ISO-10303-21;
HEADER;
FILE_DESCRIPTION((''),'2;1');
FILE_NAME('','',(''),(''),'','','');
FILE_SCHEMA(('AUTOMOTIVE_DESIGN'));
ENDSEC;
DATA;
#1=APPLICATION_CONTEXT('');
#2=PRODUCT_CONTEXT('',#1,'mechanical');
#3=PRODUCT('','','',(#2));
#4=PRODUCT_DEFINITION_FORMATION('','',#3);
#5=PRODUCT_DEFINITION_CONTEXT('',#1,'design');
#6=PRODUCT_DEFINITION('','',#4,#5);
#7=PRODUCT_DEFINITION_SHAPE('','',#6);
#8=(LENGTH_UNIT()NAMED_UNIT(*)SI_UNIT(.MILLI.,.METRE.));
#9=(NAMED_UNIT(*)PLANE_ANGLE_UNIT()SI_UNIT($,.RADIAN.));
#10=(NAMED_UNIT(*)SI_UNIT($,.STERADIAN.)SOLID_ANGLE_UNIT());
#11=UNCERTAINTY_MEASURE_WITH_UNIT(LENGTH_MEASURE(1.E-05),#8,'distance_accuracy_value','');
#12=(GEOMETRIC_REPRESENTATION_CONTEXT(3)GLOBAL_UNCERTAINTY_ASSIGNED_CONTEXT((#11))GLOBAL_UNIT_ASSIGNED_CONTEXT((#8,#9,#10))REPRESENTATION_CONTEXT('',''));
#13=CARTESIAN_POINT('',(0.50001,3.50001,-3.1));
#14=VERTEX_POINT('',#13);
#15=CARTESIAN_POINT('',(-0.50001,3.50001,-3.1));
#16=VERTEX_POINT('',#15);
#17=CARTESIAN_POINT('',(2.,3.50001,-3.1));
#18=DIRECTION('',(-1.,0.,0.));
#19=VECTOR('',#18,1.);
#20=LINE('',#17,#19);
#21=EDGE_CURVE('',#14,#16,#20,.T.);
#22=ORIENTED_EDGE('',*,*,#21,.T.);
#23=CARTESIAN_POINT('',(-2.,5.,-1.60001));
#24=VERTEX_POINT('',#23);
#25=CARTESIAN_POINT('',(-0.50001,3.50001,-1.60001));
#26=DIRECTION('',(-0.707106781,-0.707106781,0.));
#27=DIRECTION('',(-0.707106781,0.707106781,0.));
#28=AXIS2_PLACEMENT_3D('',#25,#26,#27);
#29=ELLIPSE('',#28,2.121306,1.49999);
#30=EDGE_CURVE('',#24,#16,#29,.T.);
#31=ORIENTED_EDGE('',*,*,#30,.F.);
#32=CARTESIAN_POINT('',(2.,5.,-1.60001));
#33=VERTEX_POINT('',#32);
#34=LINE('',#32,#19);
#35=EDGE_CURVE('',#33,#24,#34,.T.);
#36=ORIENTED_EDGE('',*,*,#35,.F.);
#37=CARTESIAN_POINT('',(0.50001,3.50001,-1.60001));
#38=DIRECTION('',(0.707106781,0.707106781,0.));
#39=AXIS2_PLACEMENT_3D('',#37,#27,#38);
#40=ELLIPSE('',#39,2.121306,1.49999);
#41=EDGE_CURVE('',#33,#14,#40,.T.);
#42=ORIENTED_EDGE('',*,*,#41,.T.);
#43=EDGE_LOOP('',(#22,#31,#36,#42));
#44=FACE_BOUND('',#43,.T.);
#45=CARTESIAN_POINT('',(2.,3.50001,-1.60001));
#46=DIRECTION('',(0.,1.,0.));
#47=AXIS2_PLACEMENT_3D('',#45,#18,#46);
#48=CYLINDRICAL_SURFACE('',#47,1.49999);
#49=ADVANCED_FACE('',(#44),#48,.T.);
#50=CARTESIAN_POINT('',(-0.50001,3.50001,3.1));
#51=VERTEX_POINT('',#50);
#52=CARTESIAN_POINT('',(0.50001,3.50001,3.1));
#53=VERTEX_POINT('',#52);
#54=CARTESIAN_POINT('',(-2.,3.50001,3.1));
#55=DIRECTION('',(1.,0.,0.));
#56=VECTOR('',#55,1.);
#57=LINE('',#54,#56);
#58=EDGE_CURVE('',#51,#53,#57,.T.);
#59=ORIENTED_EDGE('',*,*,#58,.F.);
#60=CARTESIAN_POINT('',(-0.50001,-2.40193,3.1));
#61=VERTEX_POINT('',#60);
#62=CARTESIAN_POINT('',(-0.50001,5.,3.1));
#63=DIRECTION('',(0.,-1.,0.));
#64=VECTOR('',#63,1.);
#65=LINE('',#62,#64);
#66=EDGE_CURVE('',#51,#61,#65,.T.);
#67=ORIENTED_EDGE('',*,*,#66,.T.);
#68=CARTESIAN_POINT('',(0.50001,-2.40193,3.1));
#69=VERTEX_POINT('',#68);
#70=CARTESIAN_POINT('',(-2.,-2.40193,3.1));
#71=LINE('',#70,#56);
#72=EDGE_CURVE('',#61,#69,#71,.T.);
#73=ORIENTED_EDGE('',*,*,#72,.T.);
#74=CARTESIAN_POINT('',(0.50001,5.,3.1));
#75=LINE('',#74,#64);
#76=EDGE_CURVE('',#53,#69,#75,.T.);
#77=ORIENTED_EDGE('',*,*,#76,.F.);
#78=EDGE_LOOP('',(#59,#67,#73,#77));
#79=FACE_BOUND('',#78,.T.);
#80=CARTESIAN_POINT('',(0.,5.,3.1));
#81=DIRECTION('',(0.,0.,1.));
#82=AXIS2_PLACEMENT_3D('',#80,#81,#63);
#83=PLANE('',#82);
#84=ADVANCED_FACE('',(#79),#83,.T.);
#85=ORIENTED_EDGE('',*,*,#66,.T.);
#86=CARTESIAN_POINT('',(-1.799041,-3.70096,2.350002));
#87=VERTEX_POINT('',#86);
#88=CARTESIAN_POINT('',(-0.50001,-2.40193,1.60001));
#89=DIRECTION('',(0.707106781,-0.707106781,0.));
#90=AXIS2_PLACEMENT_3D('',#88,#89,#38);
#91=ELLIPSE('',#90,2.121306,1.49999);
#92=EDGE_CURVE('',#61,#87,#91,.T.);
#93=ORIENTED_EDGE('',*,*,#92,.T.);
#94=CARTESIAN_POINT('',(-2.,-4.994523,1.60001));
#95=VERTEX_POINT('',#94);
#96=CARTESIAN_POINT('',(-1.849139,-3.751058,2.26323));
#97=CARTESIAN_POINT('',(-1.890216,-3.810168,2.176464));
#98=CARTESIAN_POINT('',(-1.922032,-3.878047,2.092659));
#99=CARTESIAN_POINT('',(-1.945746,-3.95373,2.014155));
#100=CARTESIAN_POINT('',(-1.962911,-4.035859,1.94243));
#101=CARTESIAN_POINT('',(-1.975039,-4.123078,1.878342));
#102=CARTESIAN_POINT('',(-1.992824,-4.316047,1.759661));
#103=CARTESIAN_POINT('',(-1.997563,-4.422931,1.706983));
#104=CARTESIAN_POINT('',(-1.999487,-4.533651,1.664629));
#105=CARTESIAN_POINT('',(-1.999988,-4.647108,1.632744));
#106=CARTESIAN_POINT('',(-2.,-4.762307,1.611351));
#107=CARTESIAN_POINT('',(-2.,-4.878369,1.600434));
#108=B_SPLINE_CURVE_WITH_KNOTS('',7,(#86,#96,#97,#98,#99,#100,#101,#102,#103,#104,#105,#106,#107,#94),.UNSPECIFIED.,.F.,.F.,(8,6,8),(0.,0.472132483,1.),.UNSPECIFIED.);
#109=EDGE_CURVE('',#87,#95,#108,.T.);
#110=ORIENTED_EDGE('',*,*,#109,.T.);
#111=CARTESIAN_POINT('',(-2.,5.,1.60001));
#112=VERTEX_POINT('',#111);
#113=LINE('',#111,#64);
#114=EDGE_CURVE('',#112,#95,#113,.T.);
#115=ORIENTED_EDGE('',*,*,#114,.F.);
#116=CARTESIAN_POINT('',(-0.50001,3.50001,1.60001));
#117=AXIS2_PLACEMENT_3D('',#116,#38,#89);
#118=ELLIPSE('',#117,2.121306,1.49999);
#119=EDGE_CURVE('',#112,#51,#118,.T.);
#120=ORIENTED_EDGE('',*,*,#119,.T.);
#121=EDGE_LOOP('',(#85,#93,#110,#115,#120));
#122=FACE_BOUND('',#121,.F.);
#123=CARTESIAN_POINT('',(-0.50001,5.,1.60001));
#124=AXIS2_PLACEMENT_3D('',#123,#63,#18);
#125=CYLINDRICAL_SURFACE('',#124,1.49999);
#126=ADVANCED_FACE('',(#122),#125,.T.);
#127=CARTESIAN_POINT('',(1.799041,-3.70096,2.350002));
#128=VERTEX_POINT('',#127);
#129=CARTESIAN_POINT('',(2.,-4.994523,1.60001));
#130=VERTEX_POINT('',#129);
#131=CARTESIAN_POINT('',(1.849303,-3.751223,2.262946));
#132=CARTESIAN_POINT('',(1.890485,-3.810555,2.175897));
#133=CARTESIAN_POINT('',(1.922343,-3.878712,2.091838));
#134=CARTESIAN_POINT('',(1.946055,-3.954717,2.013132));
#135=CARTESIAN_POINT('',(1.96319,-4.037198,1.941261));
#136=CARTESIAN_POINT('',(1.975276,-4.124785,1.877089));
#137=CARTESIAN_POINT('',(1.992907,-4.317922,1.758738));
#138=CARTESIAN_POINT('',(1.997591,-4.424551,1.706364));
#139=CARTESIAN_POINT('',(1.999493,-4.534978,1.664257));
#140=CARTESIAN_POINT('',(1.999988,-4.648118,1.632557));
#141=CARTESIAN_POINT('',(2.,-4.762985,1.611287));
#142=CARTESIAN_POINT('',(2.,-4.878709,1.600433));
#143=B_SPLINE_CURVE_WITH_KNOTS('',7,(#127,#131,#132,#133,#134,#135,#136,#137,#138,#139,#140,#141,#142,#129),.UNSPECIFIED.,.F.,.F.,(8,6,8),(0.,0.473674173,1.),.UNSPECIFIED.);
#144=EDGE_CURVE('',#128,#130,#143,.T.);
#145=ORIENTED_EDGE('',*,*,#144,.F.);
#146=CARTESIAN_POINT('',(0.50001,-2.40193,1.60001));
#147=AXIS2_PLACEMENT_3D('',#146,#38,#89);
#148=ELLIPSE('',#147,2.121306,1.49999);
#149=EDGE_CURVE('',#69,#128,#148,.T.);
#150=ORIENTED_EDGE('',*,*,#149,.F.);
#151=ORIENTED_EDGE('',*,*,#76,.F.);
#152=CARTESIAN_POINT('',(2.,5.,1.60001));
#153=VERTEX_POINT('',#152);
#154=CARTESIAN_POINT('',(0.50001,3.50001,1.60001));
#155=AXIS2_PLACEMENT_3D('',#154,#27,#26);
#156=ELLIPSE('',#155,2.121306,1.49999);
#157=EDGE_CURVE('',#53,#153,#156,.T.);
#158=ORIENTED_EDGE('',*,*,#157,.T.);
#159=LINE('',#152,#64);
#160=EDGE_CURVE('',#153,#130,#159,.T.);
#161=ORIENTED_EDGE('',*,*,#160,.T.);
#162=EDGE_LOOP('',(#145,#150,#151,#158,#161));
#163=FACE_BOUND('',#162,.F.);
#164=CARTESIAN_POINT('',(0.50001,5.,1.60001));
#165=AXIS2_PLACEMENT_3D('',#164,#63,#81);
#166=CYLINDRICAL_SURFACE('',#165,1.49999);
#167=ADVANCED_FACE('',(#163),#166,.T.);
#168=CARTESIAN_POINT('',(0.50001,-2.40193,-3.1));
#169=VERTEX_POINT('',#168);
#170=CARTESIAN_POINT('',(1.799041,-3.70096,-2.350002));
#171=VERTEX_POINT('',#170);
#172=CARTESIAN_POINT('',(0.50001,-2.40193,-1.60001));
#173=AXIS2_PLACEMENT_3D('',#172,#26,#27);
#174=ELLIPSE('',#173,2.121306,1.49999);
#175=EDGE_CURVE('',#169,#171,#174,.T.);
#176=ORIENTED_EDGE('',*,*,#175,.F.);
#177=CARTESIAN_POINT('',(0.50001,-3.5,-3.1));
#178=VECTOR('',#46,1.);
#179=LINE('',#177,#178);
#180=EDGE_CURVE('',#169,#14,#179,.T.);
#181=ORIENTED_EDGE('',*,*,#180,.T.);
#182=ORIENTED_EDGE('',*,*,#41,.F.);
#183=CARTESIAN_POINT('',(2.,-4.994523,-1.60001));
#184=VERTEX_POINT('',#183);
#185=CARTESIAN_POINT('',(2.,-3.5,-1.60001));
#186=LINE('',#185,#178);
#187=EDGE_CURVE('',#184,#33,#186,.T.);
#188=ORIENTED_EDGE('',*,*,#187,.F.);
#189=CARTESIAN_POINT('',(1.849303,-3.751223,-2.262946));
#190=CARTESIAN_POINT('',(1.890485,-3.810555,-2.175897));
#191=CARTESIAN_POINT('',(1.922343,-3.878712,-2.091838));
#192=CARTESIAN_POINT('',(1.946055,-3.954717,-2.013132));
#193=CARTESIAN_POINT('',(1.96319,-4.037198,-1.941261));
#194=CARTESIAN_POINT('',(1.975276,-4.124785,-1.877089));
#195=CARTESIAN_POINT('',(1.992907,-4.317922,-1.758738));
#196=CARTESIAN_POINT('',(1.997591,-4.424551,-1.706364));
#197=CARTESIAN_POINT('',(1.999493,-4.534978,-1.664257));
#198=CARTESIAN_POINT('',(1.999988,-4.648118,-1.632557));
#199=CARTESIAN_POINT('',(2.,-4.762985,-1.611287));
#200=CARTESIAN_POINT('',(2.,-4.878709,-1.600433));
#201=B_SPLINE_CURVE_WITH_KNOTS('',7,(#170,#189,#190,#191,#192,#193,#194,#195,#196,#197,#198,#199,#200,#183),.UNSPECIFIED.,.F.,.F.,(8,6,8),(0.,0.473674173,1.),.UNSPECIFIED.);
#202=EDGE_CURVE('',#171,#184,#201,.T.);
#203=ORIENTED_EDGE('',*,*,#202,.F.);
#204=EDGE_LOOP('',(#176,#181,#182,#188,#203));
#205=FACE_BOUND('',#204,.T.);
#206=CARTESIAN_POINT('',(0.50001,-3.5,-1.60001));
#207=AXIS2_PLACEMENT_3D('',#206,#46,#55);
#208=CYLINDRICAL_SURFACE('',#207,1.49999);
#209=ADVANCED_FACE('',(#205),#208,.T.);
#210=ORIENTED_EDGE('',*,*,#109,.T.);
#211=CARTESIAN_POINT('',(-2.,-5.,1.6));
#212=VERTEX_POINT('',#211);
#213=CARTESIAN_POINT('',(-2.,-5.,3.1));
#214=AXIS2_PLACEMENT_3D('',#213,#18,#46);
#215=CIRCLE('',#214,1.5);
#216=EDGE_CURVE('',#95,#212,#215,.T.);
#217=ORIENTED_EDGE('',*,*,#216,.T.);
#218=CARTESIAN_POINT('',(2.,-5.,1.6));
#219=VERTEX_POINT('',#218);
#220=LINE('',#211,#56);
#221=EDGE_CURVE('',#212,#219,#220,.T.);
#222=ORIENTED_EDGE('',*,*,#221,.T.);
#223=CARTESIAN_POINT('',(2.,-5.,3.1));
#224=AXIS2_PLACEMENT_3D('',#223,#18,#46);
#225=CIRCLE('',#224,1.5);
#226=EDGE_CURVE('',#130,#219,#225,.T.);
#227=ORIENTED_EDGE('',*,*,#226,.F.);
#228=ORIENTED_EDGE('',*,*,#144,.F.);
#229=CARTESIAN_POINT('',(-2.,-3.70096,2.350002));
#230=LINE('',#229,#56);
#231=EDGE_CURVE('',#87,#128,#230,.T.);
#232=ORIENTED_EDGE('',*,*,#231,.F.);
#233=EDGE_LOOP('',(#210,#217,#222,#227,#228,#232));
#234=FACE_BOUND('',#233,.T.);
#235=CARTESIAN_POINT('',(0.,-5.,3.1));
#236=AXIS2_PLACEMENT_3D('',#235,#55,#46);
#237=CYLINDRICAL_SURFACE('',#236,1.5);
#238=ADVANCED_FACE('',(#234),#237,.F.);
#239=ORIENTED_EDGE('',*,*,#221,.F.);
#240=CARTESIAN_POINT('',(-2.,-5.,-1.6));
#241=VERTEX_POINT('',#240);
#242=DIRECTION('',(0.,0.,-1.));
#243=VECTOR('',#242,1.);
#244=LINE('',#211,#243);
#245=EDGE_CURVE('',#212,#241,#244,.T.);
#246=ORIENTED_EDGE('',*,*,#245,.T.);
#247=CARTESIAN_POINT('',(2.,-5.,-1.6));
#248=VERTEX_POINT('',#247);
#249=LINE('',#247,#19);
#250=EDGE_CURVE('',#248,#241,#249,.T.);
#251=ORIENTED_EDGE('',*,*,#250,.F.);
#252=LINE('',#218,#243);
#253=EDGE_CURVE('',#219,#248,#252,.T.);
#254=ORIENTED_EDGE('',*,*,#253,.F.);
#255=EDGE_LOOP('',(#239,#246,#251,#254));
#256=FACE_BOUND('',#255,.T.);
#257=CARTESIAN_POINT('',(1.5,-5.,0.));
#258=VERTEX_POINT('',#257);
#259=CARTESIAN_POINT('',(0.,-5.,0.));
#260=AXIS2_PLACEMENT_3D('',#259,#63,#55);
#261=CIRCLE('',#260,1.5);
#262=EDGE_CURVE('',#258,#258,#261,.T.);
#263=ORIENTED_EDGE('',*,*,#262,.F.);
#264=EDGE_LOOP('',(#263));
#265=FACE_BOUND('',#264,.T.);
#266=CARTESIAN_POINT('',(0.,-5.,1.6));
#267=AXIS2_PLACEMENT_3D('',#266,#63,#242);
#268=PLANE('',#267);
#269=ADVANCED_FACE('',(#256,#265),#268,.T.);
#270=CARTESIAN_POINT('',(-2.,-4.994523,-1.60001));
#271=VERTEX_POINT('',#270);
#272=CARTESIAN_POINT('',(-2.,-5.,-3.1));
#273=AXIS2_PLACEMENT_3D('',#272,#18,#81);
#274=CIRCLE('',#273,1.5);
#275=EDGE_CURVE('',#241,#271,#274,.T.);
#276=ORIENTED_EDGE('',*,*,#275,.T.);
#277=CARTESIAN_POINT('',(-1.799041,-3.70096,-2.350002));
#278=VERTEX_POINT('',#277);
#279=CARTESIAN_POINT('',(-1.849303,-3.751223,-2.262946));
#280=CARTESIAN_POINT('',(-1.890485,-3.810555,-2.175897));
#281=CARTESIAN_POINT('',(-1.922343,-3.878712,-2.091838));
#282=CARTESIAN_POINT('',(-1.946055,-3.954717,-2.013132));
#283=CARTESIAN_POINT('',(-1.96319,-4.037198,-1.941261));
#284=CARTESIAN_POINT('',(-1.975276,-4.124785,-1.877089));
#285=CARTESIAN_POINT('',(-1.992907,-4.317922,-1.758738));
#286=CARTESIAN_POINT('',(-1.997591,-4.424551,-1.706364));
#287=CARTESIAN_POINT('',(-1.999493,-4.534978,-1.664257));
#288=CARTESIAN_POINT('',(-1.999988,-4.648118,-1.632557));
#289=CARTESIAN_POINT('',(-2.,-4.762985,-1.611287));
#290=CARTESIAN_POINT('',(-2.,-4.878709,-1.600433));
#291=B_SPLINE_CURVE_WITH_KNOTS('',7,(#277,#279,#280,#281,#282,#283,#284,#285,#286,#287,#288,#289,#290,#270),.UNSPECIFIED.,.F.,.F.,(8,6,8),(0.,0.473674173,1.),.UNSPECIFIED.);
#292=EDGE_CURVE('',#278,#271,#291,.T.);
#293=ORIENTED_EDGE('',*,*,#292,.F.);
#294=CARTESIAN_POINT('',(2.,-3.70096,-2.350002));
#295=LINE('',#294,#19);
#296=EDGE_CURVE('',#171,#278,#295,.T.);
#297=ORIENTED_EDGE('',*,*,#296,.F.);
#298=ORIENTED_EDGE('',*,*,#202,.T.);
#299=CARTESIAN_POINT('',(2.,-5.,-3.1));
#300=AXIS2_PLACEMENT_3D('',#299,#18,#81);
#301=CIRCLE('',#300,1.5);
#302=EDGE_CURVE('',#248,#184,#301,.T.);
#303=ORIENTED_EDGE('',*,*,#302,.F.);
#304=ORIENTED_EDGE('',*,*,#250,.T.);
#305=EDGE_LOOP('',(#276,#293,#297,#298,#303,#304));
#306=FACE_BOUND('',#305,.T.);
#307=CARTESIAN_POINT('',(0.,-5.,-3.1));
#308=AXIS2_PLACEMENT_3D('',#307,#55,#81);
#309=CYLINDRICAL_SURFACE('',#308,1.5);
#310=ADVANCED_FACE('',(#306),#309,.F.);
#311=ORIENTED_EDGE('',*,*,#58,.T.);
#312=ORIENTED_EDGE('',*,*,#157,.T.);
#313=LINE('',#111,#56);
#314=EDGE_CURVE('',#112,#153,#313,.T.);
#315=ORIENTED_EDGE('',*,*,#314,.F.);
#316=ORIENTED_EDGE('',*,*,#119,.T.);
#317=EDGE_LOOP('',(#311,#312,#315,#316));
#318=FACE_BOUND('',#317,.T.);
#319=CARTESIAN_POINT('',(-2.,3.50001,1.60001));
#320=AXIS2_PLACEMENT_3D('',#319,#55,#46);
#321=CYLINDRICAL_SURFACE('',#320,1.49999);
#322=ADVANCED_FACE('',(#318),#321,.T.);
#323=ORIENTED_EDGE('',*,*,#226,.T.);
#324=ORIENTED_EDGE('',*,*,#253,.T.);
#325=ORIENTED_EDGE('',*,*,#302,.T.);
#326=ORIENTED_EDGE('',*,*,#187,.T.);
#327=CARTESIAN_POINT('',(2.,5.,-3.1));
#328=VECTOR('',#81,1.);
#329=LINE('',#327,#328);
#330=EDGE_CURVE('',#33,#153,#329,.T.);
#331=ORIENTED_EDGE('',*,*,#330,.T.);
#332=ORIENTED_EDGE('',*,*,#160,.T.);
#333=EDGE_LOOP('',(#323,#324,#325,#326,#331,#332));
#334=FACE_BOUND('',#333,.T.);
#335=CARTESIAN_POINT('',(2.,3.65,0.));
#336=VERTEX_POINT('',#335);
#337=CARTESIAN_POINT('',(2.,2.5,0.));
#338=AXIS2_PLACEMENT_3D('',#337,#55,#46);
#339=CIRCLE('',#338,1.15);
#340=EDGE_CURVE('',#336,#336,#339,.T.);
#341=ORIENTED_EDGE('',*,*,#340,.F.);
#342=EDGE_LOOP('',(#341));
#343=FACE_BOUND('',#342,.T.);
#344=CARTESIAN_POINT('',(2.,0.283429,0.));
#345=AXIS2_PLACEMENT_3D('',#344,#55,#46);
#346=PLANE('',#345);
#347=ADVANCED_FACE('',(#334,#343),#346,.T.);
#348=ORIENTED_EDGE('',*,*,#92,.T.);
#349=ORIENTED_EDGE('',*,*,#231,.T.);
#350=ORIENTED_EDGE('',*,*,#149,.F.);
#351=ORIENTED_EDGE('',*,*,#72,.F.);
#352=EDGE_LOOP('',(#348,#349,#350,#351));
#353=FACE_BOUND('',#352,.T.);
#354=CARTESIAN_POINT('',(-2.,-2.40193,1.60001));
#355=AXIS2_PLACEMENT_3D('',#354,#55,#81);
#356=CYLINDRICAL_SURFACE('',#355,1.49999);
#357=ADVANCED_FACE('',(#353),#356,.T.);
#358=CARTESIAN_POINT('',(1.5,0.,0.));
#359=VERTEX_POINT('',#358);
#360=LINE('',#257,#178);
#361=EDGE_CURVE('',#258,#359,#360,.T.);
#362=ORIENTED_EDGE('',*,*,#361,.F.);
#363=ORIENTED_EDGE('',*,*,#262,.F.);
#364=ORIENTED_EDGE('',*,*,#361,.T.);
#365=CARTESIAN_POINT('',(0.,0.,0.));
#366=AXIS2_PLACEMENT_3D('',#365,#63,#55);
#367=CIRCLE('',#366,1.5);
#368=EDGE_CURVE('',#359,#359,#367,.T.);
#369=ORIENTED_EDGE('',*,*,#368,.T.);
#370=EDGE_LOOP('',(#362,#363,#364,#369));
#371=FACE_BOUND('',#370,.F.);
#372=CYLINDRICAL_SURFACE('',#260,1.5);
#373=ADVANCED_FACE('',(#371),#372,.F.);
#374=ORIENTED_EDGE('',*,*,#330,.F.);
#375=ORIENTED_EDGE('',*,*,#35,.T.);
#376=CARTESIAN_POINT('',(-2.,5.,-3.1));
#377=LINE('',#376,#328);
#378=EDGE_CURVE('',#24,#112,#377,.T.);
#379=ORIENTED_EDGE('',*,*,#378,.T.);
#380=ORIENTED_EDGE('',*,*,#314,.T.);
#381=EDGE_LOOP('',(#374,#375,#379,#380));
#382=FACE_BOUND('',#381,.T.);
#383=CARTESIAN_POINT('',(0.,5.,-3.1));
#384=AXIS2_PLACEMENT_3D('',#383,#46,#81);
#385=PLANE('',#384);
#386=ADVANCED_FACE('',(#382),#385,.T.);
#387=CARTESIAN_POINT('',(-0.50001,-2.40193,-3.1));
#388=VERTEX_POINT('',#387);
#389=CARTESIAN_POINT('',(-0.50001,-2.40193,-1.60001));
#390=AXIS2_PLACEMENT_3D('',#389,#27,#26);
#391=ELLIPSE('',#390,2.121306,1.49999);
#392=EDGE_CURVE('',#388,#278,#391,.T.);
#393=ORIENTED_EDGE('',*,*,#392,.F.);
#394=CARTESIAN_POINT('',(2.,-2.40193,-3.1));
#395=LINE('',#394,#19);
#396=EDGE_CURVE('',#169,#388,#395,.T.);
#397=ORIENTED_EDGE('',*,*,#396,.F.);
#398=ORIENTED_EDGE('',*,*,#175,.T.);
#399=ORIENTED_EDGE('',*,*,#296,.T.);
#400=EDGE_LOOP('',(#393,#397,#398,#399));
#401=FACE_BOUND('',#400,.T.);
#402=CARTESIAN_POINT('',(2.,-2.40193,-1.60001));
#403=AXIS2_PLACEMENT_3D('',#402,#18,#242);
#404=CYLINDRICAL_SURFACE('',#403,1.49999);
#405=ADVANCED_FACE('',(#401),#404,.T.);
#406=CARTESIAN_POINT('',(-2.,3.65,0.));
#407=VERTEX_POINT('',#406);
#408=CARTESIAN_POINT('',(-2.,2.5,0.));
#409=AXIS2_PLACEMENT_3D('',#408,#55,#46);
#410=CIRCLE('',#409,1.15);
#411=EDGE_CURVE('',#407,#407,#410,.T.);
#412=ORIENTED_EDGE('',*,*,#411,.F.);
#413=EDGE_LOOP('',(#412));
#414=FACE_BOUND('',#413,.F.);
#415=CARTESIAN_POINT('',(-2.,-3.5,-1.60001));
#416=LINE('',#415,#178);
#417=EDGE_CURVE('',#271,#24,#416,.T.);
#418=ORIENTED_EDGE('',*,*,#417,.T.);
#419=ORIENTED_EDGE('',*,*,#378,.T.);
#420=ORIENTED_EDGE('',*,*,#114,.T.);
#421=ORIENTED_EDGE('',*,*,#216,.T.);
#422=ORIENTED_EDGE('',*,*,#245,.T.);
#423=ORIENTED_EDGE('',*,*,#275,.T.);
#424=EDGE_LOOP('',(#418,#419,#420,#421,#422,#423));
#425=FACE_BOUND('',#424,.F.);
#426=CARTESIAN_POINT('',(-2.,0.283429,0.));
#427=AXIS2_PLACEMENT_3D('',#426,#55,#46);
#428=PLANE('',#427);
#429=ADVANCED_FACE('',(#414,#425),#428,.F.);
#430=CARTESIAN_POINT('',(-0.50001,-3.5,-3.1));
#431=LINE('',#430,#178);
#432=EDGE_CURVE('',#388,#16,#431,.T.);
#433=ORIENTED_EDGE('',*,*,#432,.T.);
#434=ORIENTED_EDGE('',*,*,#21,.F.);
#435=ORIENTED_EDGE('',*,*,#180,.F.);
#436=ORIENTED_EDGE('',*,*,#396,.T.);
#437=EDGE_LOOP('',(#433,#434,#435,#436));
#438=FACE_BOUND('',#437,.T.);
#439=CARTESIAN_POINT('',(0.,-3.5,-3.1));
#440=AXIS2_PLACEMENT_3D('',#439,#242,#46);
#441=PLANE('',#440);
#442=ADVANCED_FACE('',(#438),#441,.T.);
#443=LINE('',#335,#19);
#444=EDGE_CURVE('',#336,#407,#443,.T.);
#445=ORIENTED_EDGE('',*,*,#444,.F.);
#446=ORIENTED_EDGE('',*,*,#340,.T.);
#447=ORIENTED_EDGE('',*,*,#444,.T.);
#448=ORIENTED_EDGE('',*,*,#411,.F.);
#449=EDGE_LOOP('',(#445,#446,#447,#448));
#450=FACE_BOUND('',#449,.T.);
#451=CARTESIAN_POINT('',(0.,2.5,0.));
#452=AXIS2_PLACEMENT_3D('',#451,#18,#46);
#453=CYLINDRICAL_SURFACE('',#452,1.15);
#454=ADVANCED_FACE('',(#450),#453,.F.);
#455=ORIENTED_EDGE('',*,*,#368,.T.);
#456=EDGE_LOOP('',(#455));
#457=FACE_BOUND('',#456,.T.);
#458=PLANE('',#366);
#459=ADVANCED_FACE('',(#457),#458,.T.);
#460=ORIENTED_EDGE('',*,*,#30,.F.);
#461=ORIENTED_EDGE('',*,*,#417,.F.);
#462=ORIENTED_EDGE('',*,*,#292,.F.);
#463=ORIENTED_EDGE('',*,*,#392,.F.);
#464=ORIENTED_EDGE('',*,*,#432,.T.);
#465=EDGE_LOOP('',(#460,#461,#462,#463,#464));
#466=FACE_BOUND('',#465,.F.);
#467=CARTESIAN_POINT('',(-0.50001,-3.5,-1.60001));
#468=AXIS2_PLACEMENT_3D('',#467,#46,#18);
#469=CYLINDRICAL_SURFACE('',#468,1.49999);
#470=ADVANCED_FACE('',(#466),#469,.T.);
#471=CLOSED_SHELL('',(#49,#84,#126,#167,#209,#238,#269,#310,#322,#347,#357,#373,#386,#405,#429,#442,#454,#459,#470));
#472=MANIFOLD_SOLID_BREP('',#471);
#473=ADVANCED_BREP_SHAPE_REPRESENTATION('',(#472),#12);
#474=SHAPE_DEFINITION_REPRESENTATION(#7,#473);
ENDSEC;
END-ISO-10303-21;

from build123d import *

# Parameters (mm, degrees)
F0_R     = 1.15
F1_DEPTH = 2
F2_R     = 1.5
F3_DEPTH = 5
F4_R     = 1.49999


# Not quite as in the source:
# - a fillet or chamfer is up to 0.001 mm smaller than in the source, because OpenCascade refuses the exact size


with BuildPart() as f1:
    # F0 (on Right) → F1 (new body, symmetric)
    with BuildSketch(Plane.YZ):
        with BuildLine():
            Line((5, -3.1), (5, 3.1))
            Line((5, 3.1), (-3.5, 3.1))
            ThreePointArc((-3.5, 3.1), (-3.9393398282, 2.0393398282), (-5, 1.6))
            Line((-5, 1.6), (-5, -1.6))
            ThreePointArc((-5, -1.6), (-3.9393398282, -2.0393398282), (-3.5, -3.1))
            Line((-3.5, -3.1), (5, -3.1))
        make_face()
        with Locations((2.5, 0)):
            Circle(F0_R, mode=Mode.SUBTRACT)
    extrude(amount=F1_DEPTH, both=True)

    # F2 (on face) → F3 (cut)
    with BuildSketch(Plane.XZ.offset(5)):
        Circle(F2_R)
    extrude(amount=-F3_DEPTH, mode=Mode.SUBTRACT)

    # F4 (radius 1.5 in the source; OpenCascade refuses exactly that, so slightly less here)
    f4_edges = [f1.edges().sort_by_distance(p)[0] for p in [
        (0, -3.5, 3.1),
        (0, -3.5, -3.1),
        (2, 0.75, -3.1),
        (2, 0.75, 3.1),
        (0, 5, 3.1),
        (0, 5, -3.1),
        (-2, 0.75, 3.1),
        (-2, 0.75, -3.1),
    ]]
    fillet(f4_edges, radius=F4_R)


solid = f1.part
